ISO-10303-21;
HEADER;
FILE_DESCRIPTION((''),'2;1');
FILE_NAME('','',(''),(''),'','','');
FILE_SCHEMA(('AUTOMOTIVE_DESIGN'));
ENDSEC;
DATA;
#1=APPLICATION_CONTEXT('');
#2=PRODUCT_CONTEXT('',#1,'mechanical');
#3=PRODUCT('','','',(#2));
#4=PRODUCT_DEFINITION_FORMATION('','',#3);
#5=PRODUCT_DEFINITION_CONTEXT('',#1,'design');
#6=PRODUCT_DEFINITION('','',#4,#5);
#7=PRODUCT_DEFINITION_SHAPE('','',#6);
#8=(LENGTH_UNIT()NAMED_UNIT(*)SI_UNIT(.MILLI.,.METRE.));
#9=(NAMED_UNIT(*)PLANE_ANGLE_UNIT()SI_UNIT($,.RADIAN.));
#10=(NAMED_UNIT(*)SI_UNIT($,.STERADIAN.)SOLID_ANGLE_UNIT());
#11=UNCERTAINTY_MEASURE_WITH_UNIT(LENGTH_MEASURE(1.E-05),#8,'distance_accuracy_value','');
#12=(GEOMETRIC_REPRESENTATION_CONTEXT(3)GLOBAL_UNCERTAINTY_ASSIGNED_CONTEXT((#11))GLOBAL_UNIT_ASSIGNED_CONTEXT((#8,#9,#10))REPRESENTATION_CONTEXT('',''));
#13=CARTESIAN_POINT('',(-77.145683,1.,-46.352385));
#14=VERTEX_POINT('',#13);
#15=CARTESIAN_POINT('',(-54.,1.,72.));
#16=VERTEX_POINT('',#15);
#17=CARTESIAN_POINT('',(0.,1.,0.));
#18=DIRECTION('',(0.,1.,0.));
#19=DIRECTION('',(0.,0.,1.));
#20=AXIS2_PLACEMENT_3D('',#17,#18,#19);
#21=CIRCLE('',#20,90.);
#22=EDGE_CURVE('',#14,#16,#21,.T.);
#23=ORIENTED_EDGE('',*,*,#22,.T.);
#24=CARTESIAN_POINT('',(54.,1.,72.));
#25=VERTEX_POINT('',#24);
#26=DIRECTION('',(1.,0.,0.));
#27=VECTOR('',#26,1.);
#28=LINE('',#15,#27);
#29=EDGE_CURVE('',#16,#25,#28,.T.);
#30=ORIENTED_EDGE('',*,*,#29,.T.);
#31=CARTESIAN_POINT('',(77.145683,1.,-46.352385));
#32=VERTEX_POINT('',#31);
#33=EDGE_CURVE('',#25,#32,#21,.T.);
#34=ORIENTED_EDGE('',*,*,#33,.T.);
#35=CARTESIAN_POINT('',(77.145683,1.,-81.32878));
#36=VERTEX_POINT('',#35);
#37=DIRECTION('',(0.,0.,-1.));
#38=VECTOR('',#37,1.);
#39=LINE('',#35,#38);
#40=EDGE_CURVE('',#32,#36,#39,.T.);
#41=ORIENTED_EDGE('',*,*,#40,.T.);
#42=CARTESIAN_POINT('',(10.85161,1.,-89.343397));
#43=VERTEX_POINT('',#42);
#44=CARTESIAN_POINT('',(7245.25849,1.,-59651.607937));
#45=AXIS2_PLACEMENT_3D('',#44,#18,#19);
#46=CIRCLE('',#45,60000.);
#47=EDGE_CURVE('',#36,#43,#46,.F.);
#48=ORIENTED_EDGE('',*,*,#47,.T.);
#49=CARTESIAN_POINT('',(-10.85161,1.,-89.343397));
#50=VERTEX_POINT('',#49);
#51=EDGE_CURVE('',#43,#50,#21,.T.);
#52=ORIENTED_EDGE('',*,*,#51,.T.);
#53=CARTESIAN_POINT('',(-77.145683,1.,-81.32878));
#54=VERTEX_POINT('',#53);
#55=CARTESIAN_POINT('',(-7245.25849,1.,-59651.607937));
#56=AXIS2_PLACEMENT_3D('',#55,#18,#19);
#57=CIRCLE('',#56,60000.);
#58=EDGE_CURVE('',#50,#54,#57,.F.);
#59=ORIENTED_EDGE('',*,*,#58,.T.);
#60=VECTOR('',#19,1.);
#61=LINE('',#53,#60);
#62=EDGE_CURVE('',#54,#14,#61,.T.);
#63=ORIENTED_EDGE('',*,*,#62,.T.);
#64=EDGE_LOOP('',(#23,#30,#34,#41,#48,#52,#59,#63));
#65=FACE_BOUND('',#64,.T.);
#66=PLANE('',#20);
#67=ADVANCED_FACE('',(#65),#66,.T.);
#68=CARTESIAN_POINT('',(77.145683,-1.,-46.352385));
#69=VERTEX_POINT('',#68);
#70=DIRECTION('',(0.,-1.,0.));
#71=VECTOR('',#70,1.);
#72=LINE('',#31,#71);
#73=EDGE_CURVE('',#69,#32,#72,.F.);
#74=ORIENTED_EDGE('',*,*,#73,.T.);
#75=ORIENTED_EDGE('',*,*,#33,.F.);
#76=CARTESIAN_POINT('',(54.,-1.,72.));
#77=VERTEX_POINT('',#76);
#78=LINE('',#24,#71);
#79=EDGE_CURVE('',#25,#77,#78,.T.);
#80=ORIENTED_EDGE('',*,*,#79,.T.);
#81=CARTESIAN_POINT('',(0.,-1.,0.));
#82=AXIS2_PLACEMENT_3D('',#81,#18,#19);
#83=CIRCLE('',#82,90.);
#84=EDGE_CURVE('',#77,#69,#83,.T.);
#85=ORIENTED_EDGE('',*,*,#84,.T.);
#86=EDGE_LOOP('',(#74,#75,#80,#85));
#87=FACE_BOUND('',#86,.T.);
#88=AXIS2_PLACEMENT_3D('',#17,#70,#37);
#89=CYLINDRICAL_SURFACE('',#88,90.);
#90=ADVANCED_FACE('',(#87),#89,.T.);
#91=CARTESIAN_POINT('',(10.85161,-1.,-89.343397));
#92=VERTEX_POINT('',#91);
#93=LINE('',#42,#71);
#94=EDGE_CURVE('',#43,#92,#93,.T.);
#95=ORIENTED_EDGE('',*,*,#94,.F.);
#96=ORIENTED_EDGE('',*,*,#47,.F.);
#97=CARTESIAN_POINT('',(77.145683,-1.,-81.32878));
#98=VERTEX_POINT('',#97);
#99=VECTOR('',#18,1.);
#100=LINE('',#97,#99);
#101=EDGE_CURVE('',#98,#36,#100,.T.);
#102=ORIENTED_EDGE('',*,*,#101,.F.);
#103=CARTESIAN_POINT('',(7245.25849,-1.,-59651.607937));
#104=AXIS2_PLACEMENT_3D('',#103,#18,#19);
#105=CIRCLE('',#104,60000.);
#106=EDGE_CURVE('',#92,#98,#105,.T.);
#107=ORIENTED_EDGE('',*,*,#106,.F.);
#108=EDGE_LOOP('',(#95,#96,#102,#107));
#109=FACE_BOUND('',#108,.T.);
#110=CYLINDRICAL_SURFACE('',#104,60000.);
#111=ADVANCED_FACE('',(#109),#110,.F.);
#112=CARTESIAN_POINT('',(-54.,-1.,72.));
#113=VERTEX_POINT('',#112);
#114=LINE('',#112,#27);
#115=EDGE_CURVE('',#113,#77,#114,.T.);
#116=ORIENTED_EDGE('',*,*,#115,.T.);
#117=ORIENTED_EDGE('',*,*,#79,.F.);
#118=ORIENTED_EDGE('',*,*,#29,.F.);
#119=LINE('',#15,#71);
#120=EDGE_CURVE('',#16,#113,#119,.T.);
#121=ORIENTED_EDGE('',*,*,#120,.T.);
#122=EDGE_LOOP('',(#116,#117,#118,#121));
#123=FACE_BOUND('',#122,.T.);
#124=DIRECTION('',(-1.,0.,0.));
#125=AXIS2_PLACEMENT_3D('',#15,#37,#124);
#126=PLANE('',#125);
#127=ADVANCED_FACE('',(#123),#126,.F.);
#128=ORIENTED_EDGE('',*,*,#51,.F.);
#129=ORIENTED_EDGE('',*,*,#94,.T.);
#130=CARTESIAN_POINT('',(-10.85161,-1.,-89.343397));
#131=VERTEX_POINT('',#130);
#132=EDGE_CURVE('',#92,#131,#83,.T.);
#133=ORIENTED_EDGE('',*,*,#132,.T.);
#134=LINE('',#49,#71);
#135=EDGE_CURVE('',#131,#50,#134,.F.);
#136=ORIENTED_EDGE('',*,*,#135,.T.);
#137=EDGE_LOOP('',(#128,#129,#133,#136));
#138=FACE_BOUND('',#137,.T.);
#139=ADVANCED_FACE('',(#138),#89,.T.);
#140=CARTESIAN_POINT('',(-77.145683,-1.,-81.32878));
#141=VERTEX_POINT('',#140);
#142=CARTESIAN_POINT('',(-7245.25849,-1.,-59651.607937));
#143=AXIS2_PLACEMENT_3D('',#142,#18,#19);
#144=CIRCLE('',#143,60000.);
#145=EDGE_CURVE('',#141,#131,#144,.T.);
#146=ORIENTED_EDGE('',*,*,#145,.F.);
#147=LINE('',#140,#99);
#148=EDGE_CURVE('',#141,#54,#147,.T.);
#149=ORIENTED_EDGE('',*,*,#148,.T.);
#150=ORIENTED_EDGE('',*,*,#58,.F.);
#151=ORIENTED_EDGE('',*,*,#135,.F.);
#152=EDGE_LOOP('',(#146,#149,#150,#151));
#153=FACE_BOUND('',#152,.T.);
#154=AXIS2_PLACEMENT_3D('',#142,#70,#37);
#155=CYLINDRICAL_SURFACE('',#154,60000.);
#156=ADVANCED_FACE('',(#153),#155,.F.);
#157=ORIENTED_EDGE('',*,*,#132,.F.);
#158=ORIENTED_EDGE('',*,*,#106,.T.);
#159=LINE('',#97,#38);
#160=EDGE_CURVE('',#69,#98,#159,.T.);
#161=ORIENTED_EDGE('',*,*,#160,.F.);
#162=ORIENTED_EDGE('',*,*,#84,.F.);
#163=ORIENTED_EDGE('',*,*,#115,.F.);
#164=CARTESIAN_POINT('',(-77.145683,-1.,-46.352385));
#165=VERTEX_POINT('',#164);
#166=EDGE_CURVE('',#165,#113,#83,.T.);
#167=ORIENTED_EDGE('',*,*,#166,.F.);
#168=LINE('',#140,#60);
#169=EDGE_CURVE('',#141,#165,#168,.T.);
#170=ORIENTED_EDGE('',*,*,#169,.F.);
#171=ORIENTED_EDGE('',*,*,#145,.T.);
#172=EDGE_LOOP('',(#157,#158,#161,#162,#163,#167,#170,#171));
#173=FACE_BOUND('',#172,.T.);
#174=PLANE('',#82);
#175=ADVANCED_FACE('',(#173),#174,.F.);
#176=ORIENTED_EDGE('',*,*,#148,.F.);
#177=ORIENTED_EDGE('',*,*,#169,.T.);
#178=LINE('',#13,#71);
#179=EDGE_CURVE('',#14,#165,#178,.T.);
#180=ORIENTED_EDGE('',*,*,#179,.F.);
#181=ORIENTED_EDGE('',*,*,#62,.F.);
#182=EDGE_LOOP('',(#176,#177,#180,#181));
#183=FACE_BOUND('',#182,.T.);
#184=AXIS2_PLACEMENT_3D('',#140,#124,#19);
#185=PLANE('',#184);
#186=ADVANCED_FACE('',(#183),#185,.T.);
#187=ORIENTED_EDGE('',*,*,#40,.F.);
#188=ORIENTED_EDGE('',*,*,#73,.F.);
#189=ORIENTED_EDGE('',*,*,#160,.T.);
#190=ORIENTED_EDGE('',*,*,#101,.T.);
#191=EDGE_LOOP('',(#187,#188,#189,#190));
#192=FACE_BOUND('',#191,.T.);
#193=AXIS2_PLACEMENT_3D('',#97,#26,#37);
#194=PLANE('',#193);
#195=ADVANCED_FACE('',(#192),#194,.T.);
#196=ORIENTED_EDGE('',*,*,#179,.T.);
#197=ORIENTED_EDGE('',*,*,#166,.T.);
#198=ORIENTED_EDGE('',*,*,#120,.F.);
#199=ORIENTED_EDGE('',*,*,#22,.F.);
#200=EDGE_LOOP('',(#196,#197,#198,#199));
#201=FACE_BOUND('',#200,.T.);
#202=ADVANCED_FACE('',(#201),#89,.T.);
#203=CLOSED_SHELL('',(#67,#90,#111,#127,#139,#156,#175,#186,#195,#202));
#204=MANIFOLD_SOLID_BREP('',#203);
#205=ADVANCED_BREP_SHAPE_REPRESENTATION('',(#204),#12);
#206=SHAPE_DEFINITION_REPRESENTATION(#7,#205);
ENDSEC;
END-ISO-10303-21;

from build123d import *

# Parameters (mm, degrees)
BOSS_EXTRUDE2_DEPTH = 1
MOTOR_SPACING_W     = 154.291365686
MOTOR_SPACING_H     = 35
BOSS_EXTRUDE6_DEPTH = 2
FILLET4_START       = -1
FILLET4_DEPTH       = 2


with BuildPart() as part:
    # Top_lay → Boss-Extrude2 (new, symmetric)
    with BuildSketch(Plane(origin=(0, 0, 0), x_dir=(1, 0, 0), z_dir=(0, 1, 0))):
        with BuildLine():
            Line((-54, -72), (54, -72))
            ThreePointArc((54, -72), (0, 90), (-54, -72))
        make_face()
    extrude(amount=BOSS_EXTRUDE2_DEPTH, both=True)

    # Motor_Spacing → Boss-Extrude6 (add)
    with BuildSketch(Plane(origin=(0, 1, 0), x_dir=(1, 0, 0), z_dir=(0, 1, 0))):
        with Locations((0, 63.828780022)):
            Rectangle(MOTOR_SPACING_W, MOTOR_SPACING_H)
    extrude(amount=-BOSS_EXTRUDE6_DEPTH)

    # Fillet4: read off the stored shape, not the designer's step
    # Fillet4 outline → Fillet4 (add)
    with BuildSketch(Plane(origin=(0, 0, 0), x_dir=(1, 0, 0), z_dir=(0, 1, 0)).offset(FILLET4_START)):
        with BuildLine():
            ThreePointArc((-38.543865143, 81.328780022), (-25.0207268, 86.452086328), (-10.85161032, 89.34339681))
            ThreePointArc((-10.85161032, 89.34339681), (-43.997531602, 85.326865697), (-77.145682843, 81.328780022))
            Line((-77.145682843, 81.328780022), (-38.543865143, 81.328780022))
        make_face()
        with BuildLine():
            ThreePointArc((77.145682843, 81.328780022), (43.997531602, 85.326865697), (10.85161032, 89.34339681))
            ThreePointArc((10.85161032, 89.34339681), (25.0207268, 86.452086328), (38.543865143, 81.328780022))
            Line((38.543865143, 81.328780022), (77.145682843, 81.328780022))
        make_face()
    extrude(amount=FILLET4_DEPTH)


solid = part.part
